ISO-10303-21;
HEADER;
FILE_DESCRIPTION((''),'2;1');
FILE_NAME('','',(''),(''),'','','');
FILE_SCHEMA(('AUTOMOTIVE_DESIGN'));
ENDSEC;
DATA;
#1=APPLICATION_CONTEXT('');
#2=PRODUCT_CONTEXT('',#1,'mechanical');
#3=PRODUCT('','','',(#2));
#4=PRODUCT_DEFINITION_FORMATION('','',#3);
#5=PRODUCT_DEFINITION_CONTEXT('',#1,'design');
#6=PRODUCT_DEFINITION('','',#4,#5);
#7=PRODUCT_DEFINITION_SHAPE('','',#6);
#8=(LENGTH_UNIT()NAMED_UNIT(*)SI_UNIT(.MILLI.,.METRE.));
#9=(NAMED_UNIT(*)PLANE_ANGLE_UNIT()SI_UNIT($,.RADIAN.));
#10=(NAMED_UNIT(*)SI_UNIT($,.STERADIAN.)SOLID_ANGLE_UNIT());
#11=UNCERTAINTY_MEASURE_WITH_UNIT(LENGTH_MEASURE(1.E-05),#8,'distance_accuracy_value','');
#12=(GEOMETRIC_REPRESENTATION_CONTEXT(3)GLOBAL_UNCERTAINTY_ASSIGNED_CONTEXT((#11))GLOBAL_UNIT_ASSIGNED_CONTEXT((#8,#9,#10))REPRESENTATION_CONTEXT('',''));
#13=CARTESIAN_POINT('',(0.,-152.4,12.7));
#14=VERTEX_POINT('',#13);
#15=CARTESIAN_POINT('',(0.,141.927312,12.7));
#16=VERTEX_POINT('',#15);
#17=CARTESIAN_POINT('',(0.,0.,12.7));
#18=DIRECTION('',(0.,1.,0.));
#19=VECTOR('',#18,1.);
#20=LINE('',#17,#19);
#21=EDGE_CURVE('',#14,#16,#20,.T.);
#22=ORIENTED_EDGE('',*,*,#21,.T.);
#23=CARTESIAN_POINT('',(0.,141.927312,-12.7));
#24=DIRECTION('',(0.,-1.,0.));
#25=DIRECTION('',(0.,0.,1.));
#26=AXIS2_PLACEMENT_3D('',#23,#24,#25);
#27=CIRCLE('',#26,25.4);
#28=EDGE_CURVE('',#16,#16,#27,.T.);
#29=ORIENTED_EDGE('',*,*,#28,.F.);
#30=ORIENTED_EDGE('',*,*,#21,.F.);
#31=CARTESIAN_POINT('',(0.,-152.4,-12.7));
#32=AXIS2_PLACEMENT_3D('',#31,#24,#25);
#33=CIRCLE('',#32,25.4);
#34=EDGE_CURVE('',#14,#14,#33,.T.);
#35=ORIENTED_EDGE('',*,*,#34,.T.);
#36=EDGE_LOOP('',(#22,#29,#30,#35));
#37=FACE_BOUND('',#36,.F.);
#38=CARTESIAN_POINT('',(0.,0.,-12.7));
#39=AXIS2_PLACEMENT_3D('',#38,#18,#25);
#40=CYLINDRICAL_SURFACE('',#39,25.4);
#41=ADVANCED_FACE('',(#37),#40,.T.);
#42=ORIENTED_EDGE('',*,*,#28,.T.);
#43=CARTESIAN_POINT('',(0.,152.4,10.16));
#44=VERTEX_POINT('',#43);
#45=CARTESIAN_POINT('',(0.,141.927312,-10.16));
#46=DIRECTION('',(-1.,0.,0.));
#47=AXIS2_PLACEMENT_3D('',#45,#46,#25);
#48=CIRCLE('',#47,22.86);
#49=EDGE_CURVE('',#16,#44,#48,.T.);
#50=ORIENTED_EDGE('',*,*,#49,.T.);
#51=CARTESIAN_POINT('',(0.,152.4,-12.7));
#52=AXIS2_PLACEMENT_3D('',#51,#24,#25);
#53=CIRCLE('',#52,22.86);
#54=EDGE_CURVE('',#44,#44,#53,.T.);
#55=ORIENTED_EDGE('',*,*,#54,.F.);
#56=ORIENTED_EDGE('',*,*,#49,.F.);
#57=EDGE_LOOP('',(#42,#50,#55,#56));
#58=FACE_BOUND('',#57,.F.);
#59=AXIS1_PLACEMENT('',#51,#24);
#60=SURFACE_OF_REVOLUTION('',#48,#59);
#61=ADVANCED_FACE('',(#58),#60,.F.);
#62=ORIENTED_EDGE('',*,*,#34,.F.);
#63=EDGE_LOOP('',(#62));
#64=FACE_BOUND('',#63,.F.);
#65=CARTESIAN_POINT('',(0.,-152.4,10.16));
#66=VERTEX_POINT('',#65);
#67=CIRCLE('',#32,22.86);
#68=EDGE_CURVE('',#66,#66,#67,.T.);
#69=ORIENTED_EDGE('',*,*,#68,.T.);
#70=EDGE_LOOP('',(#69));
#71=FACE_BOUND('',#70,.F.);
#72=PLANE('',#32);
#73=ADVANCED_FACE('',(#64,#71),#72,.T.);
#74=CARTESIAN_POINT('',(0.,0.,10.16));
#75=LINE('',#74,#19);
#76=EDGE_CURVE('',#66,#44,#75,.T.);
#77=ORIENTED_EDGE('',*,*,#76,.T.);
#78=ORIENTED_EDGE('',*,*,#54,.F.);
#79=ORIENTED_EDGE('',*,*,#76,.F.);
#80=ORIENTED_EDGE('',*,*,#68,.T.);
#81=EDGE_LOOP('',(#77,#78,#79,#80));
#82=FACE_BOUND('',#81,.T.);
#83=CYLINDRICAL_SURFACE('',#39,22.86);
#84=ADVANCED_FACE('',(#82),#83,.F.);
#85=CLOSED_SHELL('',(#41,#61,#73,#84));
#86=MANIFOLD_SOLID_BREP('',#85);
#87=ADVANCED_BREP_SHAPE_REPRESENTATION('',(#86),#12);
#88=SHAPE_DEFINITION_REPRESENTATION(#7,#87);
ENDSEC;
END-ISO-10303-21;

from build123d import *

# Parameters (mm, degrees)
F0_W = 304.8
F0_H = 25.4
F2_T = -2.54


# Not quite as in the source:
# - a fillet or chamfer that OpenCascade refuses, or shapes differently, is made with other operations: its cross-section is extruded or revolved along the edge and cut away or added


with BuildPart() as f1:
    # F0 (on Right) → F1 (revolve)
    with BuildSketch(Plane.YZ):
        Rectangle(F0_W, F0_H)
    revolve(axis=Axis((0, 0, -12.7), (0, -1, 0)))

    # F2
    f2_openings = [f1.faces().sort_by_distance(p)[0] for p in [
        (0, 152.4, -12.7),
        (0, -152.4, -12.7),
    ]]
    offset(amount=F2_T, openings=f2_openings)

    # F3: fillet of radius 22.86 on 1 edges, made by hand

    # F3_s1 → F3_t2 (revolve, cut)
    with BuildSketch(Plane.YZ):
        with BuildLine():
            ThreePointArc((141.9273117109, 12.7), (147.3154653836, 12.0559267194), (152.4, 10.16))
            Line((152.4, 10.16), (152.4, 12.7))
            Line((152.4, 12.7), (141.9273117109, 12.7))
        make_face()
    revolve(axis=Axis((0, 152.4, -12.7), (0, -1, 0)), mode=Mode.SUBTRACT)


solid = f1.part
